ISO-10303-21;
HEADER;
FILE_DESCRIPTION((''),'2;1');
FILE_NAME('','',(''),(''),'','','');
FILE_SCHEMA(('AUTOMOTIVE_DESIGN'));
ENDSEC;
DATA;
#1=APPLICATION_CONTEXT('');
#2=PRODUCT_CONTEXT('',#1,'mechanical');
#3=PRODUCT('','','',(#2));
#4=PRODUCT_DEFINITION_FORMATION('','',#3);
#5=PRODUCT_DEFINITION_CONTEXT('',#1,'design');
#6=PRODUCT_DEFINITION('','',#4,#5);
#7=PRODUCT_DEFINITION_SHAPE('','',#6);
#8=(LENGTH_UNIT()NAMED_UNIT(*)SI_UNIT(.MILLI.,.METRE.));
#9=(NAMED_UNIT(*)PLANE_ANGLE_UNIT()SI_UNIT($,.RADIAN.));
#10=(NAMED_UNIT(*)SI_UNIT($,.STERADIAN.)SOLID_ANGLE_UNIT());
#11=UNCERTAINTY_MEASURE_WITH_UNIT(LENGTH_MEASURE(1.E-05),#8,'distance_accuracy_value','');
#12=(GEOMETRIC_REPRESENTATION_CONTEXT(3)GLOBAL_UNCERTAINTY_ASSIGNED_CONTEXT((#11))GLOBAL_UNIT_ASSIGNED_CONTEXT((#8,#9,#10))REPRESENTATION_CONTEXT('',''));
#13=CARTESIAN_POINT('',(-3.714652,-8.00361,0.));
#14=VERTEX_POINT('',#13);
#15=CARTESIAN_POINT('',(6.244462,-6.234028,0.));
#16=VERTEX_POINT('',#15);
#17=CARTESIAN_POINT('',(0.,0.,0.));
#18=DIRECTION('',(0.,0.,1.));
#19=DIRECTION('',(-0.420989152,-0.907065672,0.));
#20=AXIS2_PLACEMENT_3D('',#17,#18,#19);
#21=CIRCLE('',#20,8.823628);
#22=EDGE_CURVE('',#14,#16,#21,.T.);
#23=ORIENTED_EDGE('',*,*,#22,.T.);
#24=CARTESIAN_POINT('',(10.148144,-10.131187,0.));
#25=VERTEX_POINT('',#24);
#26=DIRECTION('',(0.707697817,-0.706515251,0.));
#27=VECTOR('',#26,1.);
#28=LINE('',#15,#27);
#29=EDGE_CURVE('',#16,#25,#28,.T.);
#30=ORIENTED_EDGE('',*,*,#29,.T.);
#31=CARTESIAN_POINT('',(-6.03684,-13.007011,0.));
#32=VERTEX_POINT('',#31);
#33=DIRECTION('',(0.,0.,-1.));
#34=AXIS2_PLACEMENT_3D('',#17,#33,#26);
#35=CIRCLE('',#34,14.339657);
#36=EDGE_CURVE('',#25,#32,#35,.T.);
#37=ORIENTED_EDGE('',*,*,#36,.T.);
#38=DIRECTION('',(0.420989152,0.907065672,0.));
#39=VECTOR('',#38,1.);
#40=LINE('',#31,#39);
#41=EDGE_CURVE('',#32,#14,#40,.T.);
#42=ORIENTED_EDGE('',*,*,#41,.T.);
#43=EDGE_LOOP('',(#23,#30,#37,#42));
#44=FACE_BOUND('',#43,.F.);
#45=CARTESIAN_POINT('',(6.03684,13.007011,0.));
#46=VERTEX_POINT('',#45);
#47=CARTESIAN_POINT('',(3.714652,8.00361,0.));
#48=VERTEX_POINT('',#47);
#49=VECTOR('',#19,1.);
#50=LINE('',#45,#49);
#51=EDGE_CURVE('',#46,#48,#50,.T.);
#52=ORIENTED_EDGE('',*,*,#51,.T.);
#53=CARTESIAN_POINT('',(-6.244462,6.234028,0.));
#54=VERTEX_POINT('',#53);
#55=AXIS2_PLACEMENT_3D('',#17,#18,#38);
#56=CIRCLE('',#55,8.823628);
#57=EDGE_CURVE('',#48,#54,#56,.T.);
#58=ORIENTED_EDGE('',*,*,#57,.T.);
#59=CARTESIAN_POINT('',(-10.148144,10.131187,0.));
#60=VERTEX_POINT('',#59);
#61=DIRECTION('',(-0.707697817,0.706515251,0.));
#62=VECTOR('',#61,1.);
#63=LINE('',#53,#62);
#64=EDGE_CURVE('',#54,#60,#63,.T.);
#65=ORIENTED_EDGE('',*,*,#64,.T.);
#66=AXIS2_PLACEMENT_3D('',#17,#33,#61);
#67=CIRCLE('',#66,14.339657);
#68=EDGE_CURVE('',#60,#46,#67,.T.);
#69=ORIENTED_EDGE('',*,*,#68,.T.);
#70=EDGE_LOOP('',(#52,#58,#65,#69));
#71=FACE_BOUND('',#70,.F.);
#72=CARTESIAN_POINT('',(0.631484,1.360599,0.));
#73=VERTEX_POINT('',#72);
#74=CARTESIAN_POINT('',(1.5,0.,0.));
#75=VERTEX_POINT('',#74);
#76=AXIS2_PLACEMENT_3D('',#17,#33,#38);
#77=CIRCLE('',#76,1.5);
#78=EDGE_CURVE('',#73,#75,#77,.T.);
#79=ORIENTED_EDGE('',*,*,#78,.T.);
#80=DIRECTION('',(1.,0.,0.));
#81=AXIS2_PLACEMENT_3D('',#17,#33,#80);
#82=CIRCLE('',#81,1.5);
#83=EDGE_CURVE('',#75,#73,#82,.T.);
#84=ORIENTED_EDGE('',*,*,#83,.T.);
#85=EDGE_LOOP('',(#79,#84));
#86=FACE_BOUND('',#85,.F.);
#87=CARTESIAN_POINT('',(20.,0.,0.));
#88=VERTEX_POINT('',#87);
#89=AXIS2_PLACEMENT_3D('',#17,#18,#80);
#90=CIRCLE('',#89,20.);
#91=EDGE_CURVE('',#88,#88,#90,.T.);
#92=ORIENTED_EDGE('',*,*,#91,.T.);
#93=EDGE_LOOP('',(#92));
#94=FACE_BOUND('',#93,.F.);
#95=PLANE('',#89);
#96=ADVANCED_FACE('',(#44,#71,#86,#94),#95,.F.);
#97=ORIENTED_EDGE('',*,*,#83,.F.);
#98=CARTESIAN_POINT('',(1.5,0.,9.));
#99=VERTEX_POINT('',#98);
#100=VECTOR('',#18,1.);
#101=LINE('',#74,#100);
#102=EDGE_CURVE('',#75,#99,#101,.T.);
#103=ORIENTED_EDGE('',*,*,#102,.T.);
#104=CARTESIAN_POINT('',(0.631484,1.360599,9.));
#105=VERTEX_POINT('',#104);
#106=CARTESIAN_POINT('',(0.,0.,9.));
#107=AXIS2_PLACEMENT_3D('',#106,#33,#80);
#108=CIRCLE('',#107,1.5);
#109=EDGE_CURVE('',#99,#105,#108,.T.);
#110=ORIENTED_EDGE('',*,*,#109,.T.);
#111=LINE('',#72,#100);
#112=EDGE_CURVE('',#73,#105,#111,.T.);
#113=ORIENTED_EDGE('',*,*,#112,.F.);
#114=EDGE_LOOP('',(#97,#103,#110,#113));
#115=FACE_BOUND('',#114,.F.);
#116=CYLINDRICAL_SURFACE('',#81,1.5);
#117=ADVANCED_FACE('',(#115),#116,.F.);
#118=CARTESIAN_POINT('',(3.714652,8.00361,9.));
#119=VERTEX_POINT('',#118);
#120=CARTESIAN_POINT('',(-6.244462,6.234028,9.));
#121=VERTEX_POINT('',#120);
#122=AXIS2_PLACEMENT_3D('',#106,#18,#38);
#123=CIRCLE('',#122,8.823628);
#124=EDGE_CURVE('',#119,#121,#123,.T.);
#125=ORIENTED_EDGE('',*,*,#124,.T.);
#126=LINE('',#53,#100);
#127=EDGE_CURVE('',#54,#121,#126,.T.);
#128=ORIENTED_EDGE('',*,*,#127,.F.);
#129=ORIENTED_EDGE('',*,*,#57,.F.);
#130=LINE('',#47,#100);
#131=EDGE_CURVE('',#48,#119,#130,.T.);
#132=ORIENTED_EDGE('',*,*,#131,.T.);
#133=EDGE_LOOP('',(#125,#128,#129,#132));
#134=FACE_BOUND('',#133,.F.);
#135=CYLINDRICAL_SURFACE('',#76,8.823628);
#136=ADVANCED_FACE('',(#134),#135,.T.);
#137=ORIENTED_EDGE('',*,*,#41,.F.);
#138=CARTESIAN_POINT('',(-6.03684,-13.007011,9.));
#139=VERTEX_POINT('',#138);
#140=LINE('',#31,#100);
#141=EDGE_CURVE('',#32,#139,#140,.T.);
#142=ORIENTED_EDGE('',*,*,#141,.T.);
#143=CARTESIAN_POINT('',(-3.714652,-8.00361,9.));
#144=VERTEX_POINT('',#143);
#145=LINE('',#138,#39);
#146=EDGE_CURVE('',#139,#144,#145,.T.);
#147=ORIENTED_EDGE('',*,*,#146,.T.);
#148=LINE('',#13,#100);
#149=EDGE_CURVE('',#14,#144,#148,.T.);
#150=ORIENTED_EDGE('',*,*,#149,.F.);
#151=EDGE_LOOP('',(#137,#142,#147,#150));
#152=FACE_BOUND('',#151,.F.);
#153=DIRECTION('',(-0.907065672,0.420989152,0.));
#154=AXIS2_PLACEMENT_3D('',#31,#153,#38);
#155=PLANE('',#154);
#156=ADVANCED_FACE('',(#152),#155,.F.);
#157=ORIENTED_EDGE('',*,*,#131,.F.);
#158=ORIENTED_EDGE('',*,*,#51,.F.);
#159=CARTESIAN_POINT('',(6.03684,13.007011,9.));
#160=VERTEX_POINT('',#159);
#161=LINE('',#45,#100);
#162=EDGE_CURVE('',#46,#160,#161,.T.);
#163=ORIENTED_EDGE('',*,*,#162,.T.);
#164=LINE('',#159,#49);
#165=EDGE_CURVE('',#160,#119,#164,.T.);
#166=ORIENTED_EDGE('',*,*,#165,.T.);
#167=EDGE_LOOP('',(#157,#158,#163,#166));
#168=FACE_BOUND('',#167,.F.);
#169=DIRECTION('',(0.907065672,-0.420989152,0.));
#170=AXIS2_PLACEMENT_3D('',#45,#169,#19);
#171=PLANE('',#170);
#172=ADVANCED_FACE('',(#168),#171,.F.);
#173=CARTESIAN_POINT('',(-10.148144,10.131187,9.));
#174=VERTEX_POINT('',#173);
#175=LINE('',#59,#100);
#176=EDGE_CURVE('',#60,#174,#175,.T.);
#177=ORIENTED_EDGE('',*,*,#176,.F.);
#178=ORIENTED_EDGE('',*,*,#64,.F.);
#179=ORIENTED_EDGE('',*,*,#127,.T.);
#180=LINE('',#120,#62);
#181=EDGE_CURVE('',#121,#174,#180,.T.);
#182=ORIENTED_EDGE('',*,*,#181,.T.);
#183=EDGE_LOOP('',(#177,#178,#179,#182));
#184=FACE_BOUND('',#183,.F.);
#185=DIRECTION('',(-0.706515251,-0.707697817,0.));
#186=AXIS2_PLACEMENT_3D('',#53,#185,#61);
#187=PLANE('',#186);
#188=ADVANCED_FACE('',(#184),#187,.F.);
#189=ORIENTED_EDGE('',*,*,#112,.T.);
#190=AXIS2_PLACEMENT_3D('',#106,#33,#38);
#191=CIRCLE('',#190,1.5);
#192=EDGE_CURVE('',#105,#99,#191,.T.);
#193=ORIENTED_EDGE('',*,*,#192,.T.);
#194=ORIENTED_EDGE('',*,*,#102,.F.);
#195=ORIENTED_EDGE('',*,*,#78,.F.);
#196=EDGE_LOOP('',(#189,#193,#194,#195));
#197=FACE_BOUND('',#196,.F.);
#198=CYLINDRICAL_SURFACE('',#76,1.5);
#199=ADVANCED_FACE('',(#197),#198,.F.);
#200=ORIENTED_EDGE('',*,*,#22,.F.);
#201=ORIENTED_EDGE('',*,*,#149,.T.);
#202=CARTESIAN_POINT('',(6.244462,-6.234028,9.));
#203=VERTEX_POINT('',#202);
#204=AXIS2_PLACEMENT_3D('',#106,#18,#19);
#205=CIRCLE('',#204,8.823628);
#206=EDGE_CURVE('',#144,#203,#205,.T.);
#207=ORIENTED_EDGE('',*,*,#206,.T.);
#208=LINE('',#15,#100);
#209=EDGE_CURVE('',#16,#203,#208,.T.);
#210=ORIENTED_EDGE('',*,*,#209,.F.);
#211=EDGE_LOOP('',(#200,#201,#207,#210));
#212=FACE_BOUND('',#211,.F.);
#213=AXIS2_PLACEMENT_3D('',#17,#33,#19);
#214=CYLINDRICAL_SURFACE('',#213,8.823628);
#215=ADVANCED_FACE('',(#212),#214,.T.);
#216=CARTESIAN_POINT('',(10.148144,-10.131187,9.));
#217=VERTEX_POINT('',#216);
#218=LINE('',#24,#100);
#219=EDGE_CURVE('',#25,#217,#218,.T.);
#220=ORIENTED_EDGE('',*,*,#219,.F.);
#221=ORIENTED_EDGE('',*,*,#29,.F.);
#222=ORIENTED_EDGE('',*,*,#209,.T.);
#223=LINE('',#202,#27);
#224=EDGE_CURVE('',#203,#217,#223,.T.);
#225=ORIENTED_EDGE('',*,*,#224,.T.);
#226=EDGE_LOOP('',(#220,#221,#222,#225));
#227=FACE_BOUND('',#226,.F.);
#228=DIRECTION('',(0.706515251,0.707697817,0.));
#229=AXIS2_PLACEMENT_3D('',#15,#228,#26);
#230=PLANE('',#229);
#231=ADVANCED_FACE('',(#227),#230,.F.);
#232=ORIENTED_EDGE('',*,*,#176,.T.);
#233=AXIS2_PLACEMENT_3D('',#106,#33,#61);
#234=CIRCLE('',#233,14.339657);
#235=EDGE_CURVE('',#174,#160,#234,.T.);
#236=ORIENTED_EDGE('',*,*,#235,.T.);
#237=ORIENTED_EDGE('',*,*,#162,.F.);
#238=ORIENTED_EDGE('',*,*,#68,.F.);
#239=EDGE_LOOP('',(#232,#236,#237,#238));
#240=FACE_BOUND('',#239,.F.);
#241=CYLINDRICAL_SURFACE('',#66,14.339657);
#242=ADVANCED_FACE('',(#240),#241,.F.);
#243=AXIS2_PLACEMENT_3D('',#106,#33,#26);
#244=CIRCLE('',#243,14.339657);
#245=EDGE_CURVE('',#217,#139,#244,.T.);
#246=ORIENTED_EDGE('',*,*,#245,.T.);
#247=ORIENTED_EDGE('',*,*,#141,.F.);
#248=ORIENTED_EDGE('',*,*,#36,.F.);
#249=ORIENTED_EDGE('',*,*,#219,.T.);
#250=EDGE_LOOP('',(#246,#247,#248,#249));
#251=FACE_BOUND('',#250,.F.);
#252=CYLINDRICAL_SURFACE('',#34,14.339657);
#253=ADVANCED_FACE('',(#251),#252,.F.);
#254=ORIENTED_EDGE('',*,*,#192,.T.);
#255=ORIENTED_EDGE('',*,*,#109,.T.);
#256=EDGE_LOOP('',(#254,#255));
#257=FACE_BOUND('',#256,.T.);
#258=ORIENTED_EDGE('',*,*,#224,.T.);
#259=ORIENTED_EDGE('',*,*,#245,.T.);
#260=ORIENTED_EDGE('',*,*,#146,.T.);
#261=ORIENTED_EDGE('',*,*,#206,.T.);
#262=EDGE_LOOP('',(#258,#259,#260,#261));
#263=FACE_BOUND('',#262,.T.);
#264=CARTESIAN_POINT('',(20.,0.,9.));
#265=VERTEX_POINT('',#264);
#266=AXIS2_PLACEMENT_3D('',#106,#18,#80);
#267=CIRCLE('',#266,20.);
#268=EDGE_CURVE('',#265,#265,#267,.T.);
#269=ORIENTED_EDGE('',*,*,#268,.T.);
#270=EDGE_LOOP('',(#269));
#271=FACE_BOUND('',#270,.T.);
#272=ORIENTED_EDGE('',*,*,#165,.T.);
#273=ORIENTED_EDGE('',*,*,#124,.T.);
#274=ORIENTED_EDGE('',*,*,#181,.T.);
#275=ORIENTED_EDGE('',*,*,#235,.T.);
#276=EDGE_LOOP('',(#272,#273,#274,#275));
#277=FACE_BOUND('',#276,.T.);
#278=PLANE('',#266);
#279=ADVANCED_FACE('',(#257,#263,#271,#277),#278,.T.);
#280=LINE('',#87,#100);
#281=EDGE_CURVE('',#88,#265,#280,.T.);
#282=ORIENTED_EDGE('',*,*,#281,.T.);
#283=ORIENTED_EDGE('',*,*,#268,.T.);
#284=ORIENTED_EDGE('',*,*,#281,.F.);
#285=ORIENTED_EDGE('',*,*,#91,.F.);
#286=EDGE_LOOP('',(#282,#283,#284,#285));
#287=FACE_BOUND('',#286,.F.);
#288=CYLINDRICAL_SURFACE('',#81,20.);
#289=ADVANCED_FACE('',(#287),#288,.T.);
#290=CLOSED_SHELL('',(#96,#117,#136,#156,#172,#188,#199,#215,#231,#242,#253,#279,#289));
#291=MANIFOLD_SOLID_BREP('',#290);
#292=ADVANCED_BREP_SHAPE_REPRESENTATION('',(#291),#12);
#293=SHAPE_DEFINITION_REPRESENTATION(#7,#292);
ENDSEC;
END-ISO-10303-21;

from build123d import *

# Parameters (mm, degrees)
F0_R     = 20
F1_DEPTH = 9


# Not quite as in the source:
# - a feature names something its author has since deleted; it is built from what else it names


with BuildPart() as f1:
    # F0 (on Top) → F1 (new body)
    with BuildSketch(Plane.XY):
        Circle(F0_R)
        with BuildLine():
            Line((-6.0368402564, -13.007011068), (-3.7146515348, -8.0036097652))
            ThreePointArc((-3.7146515348, -8.0036097652), (1.5436452389, -8.6875522833), (6.244462038, -6.2340275228))
            Line((6.244462038, -6.2340275228), (10.1481443029, -10.1311867228))
            ThreePointArc((10.1481443029, -10.1311867228), (2.5086443863, -14.1185155221), (-6.0368402564, -13.007011068))
        make_face(mode=Mode.SUBTRACT)
        with BuildLine():
            Line((6.0368402564, 13.007011068), (3.7146515348, 8.0036097652))
            ThreePointArc((3.7146515348, 8.0036097652), (-1.5436452389, 8.6875522833), (-6.244462038, 6.2340275228))
            Line((-6.244462038, 6.2340275228), (-10.1481443029, 10.1311867228))
            ThreePointArc((-10.1481443029, 10.1311867228), (-2.5086443863, 14.1185155221), (6.0368402564, 13.007011068))
        make_face(mode=Mode.SUBTRACT)
        with BuildLine():
            ThreePointArc((0.6314837286, 1.3605985082), (1.2643626048, 0.8070856234), (1.5, 0))
            ThreePointArc((1.5, 0), (-1.2643626048, -0.8070856234), (0.6314837286, 1.3605985082))
        make_face(mode=Mode.SUBTRACT)
    extrude(amount=F1_DEPTH)


solid = f1.part
